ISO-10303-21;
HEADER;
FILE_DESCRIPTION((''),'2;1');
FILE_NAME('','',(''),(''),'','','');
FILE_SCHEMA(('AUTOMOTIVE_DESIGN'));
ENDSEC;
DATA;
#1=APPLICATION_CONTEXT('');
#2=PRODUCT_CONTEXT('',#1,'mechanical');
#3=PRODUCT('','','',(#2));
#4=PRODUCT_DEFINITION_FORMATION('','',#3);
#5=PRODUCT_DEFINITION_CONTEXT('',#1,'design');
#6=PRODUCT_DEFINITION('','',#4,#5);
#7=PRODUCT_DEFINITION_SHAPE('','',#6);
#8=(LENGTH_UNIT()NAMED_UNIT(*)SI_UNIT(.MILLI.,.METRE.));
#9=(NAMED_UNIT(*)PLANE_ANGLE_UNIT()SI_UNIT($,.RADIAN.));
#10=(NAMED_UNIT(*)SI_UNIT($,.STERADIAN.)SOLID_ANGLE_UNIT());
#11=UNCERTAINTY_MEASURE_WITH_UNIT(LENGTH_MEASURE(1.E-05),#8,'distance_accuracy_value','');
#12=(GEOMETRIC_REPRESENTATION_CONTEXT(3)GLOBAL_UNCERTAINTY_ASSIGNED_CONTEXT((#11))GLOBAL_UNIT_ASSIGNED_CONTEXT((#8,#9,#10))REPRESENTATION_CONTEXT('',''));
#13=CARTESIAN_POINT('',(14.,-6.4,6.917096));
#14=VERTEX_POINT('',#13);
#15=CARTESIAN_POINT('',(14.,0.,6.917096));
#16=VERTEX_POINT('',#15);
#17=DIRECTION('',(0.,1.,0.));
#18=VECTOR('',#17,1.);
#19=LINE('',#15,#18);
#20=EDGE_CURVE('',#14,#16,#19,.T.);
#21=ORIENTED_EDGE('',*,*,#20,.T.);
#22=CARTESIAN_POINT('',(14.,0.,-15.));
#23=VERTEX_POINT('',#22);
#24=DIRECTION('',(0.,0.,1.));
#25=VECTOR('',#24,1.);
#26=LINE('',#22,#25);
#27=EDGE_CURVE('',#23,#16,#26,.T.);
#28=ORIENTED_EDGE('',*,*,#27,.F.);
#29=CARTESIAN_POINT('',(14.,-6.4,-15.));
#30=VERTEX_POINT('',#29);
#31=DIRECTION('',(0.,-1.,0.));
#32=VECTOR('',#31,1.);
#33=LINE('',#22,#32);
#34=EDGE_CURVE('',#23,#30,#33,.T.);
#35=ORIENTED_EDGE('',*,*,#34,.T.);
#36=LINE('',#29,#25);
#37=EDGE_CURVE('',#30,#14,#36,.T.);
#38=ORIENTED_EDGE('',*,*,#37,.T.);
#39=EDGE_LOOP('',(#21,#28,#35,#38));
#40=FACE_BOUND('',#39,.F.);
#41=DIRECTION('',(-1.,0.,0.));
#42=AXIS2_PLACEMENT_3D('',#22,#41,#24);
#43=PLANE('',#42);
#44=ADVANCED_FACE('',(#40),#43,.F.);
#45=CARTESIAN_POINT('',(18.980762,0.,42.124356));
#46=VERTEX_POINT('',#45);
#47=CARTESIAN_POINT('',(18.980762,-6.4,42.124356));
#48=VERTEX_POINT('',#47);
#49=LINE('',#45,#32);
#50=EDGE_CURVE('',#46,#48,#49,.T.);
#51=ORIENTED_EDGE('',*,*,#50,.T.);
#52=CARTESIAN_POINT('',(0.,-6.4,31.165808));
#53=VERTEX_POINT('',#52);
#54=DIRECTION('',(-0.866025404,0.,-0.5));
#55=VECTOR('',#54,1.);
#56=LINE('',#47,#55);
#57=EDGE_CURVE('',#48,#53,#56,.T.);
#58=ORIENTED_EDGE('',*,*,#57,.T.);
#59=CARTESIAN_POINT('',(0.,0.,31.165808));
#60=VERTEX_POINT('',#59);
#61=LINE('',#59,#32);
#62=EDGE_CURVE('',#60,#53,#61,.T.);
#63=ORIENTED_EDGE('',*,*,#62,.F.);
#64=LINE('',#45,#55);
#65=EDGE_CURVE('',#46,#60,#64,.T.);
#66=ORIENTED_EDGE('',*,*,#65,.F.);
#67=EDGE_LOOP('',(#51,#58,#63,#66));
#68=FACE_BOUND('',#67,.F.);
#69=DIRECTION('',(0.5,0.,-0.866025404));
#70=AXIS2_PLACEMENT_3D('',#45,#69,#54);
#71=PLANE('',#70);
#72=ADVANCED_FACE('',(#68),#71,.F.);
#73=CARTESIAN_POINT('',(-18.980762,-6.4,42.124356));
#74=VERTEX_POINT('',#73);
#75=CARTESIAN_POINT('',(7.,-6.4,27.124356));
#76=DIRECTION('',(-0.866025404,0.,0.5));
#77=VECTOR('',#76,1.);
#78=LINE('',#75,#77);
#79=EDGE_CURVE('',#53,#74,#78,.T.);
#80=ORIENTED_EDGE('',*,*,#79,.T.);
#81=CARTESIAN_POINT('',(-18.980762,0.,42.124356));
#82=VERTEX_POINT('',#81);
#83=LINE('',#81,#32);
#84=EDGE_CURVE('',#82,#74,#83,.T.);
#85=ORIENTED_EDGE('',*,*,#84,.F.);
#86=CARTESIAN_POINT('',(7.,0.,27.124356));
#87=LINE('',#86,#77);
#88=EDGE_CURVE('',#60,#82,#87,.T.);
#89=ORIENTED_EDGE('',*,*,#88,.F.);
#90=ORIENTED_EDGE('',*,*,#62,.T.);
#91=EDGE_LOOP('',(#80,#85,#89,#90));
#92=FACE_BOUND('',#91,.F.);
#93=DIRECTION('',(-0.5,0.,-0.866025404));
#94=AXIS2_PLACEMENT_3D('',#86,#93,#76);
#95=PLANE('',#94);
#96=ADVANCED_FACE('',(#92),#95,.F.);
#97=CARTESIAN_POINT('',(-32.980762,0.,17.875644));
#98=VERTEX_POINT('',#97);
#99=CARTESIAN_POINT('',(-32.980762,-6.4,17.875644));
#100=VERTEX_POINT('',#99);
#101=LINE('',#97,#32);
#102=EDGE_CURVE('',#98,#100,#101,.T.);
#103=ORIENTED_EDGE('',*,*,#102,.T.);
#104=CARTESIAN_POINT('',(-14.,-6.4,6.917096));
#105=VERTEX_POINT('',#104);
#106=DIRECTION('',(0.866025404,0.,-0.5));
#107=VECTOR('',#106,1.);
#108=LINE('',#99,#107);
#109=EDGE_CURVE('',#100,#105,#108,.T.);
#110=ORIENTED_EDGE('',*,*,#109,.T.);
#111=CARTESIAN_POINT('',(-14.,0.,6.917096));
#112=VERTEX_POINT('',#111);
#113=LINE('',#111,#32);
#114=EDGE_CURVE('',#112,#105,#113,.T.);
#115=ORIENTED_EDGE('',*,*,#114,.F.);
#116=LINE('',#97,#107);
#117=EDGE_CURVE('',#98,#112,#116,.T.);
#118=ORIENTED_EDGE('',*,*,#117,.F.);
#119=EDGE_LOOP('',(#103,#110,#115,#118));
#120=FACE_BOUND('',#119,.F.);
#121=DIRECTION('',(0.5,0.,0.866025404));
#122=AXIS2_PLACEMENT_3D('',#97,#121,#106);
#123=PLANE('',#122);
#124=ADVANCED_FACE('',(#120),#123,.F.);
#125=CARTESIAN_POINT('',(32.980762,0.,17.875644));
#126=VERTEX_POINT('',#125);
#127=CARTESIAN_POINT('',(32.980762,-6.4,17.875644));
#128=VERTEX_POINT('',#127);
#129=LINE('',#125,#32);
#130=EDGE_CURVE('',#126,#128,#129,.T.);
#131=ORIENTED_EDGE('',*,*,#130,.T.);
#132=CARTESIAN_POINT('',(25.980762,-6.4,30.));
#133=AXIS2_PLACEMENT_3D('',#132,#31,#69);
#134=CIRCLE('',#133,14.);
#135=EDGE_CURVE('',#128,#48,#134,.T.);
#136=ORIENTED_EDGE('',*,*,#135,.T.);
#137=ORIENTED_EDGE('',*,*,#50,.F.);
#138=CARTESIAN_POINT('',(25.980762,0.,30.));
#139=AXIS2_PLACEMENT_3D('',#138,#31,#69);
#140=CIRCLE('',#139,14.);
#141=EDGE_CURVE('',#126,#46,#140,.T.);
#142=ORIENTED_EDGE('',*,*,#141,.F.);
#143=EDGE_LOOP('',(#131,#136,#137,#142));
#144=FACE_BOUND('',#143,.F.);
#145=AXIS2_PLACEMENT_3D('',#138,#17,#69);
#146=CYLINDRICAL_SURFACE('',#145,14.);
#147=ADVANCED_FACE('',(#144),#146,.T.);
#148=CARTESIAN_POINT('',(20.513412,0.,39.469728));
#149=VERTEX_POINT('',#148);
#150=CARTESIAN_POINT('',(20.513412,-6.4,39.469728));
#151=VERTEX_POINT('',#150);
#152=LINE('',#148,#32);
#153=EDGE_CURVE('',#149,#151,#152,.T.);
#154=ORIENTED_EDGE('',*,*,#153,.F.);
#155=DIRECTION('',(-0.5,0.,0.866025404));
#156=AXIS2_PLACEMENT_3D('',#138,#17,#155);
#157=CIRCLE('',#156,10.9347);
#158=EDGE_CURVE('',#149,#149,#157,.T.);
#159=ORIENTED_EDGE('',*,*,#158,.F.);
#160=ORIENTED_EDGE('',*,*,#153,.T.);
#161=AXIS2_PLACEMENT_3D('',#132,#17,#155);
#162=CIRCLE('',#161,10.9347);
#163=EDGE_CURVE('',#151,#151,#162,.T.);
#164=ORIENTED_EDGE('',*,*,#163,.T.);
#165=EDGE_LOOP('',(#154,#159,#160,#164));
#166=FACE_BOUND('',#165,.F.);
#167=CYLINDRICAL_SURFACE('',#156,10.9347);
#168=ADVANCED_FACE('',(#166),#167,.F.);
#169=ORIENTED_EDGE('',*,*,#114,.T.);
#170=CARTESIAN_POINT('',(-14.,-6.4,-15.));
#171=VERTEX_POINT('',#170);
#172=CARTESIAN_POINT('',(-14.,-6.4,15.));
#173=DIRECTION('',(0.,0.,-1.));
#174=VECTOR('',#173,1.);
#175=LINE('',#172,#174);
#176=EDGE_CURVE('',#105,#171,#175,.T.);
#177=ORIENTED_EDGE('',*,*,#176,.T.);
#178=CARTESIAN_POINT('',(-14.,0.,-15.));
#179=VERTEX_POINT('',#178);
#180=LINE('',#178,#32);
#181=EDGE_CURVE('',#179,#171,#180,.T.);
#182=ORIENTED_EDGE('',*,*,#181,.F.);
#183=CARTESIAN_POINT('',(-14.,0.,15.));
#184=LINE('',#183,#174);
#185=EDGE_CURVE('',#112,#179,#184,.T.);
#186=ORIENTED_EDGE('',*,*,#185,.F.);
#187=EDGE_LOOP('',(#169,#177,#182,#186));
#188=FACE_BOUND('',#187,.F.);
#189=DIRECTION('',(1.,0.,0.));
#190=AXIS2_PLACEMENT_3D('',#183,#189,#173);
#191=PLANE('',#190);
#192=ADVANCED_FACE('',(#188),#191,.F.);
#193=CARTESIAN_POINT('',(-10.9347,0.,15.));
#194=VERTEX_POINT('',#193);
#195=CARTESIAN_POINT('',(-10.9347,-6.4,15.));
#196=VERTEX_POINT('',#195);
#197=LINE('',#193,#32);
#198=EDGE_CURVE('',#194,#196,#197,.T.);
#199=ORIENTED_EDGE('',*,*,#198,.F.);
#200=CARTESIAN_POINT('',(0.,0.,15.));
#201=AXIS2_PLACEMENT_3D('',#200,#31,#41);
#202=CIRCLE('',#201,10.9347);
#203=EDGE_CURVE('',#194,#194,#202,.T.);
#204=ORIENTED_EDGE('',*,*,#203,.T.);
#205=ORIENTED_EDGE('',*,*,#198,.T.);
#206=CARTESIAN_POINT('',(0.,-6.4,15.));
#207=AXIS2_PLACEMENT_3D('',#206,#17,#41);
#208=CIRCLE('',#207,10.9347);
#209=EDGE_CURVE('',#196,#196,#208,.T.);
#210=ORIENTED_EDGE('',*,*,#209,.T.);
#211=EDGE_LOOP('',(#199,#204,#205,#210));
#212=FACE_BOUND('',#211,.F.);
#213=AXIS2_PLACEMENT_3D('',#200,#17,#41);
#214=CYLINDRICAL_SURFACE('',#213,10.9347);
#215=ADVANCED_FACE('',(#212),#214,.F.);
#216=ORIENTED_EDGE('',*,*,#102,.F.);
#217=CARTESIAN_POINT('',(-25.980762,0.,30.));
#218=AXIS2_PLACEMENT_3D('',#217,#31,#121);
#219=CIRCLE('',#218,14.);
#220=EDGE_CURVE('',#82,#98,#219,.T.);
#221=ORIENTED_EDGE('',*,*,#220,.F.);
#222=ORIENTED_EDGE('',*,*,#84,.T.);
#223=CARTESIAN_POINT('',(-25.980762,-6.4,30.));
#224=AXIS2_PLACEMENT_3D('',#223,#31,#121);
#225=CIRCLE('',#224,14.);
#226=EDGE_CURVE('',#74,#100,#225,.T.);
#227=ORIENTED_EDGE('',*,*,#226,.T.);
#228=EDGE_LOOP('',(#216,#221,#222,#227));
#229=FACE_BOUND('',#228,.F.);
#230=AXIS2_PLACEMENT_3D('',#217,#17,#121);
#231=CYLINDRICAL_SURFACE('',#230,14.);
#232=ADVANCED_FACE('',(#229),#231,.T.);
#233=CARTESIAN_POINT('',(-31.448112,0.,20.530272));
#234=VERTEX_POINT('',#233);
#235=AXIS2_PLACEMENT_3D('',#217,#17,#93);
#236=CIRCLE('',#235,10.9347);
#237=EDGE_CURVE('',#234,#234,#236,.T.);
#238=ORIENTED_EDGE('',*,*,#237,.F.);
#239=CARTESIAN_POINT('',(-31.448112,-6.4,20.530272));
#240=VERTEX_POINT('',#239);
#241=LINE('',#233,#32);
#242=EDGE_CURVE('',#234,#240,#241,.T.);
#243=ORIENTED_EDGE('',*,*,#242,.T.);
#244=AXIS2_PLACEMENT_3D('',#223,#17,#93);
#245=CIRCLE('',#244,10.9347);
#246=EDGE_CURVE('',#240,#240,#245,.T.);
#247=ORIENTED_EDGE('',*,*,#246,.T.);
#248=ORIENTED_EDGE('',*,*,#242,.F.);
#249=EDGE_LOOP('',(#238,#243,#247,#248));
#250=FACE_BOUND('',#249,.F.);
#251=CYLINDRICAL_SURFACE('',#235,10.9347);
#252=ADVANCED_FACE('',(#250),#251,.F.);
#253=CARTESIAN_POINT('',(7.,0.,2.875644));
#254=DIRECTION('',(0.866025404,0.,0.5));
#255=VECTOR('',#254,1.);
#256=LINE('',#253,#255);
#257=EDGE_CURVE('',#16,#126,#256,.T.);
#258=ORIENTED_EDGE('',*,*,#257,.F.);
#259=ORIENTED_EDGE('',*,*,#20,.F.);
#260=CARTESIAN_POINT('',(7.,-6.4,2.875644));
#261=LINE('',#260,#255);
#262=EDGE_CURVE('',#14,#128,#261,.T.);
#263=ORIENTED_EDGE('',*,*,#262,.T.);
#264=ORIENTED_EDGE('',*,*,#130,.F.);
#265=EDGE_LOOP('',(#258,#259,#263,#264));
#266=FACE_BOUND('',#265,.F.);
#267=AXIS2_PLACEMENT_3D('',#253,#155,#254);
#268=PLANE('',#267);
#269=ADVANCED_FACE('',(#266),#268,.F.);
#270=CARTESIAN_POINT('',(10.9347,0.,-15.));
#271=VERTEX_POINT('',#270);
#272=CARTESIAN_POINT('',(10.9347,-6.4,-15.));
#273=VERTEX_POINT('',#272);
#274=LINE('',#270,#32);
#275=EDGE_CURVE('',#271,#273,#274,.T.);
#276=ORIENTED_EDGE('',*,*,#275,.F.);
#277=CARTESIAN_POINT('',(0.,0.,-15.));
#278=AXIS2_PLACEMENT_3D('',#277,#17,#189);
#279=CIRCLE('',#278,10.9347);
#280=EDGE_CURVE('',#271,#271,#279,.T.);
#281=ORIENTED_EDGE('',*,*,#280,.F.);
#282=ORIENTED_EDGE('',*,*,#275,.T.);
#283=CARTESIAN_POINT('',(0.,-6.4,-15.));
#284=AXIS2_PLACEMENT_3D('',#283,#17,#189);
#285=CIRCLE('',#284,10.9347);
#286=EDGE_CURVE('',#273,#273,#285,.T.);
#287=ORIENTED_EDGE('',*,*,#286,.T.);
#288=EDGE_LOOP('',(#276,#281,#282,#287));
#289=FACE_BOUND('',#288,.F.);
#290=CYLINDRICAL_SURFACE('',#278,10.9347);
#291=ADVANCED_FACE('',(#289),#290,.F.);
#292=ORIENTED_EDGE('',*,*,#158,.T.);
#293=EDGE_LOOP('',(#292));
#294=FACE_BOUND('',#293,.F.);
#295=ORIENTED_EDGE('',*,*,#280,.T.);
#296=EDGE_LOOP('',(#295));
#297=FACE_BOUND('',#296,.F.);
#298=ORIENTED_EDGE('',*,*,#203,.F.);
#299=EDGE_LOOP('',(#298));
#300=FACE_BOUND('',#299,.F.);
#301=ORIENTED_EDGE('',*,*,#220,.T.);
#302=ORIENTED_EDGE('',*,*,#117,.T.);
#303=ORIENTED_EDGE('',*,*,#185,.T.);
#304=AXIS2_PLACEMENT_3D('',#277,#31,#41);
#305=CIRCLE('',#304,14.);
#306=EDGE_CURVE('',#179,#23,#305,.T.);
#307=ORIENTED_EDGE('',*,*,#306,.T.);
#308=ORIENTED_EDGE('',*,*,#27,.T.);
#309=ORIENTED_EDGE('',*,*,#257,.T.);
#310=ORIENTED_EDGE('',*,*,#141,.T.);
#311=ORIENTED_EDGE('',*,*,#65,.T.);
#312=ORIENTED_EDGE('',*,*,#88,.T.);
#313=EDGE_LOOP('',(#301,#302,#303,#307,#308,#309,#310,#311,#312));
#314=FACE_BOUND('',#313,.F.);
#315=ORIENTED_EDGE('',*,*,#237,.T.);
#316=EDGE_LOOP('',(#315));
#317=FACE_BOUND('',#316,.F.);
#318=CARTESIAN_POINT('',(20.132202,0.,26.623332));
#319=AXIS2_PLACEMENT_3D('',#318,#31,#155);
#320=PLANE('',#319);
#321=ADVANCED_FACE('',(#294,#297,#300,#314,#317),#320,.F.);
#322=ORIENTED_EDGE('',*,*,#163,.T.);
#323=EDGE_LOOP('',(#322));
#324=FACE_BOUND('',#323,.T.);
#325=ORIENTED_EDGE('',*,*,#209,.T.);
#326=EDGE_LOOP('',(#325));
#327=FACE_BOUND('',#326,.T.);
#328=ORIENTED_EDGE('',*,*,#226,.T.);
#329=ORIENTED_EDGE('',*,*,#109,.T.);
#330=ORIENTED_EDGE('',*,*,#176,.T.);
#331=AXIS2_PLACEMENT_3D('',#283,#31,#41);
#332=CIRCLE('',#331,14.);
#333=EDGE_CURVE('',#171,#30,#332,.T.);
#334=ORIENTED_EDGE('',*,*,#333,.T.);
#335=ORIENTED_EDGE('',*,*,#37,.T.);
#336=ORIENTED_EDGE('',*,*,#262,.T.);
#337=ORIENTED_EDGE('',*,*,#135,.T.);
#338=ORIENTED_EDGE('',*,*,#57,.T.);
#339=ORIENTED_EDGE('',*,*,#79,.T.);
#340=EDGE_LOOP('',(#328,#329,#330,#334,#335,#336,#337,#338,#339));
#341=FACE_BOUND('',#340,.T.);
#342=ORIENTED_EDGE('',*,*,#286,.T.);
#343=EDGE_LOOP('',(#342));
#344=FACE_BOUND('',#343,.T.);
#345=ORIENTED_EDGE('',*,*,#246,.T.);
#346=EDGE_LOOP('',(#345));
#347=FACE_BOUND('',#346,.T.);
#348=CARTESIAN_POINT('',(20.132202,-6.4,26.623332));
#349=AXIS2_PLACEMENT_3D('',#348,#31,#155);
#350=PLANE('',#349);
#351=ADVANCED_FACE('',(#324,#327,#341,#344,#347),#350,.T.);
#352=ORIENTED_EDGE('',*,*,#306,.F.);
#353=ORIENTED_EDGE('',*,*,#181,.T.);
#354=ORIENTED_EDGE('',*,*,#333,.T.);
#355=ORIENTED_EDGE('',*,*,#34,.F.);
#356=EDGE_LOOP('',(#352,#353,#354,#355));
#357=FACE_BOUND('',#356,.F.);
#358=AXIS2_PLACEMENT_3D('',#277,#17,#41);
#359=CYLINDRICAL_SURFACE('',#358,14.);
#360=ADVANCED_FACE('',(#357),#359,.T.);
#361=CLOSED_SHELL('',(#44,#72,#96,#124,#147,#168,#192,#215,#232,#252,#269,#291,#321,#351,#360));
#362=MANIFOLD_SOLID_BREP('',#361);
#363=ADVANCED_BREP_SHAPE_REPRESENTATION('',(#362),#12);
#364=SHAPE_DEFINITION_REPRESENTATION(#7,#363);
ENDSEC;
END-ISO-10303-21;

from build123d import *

# Parameters (mm, degrees)
F1_DEPTH        = 6.4
F1_COPIES_COUNT = 3


# Not quite as in the source:
# - a feature of the source that left no trace in its solid (it failed there, or was rolled back) is left out
# - a pattern or mirror of a feature is missing from the dataset's text; its kind, count and spacing are read off the source's solid


with BuildPart() as f1:
    # F0 (on Front) → F1 (new body)
    with BuildSketch(Plane.XZ):
        with BuildLine():
            Line((10.9347, -15), (14, -15))
            ThreePointArc((14, -15), (0, -1), (-14, -15))
            Line((-14, -15), (-10.9347, -15))
            ThreePointArc((-10.9347, -15), (0, -4.0653), (10.9347, -15))
        make_face()
        with BuildLine():
            ThreePointArc((-14, -15), (0, -29), (14, -15))
            Line((14, -15), (10.9347, -15))
            ThreePointArc((10.9347, -15), (0, -25.9347), (-10.9347, -15))
            Line((-10.9347, -15), (-14, -15))
        make_face()
        with BuildLine():
            ThreePointArc((-14, -15), (0, -1), (14, -15))
            Line((14, -15), (14, 15))
            ThreePointArc((14, 15), (0, 1), (-14, 15))
            Line((-14, 15), (-14, -15))
        make_face()
        with BuildLine():
            ThreePointArc((-14, 15), (0, 1), (14, 15))
            Line((14, 15), (10.9347, 15))
            ThreePointArc((10.9347, 15), (0, 4.0653), (-10.9347, 15))
            Line((-10.9347, 15), (-14, 15))
        make_face()
        with BuildLine():
            Line((10.9347, 15), (14, 15))
            ThreePointArc((14, 15), (0, 29), (-14, 15))
            Line((-14, 15), (-10.9347, 15))
            ThreePointArc((-10.9347, 15), (0, 25.9347), (10.9347, 15))
        make_face()
    extrude(amount=F1_DEPTH)

    # F1_copies: F1 ×3 about axis
    f1_copies_axis = Axis((0, 0, 15), (0, 1, 0))


with BuildPart() as f1_1:
    add(f1.part)
    for i in range(1, F1_COPIES_COUNT):
        add(f1.part.rotate(f1_copies_axis, i * 360 / F1_COPIES_COUNT))


solid = f1_1.part
